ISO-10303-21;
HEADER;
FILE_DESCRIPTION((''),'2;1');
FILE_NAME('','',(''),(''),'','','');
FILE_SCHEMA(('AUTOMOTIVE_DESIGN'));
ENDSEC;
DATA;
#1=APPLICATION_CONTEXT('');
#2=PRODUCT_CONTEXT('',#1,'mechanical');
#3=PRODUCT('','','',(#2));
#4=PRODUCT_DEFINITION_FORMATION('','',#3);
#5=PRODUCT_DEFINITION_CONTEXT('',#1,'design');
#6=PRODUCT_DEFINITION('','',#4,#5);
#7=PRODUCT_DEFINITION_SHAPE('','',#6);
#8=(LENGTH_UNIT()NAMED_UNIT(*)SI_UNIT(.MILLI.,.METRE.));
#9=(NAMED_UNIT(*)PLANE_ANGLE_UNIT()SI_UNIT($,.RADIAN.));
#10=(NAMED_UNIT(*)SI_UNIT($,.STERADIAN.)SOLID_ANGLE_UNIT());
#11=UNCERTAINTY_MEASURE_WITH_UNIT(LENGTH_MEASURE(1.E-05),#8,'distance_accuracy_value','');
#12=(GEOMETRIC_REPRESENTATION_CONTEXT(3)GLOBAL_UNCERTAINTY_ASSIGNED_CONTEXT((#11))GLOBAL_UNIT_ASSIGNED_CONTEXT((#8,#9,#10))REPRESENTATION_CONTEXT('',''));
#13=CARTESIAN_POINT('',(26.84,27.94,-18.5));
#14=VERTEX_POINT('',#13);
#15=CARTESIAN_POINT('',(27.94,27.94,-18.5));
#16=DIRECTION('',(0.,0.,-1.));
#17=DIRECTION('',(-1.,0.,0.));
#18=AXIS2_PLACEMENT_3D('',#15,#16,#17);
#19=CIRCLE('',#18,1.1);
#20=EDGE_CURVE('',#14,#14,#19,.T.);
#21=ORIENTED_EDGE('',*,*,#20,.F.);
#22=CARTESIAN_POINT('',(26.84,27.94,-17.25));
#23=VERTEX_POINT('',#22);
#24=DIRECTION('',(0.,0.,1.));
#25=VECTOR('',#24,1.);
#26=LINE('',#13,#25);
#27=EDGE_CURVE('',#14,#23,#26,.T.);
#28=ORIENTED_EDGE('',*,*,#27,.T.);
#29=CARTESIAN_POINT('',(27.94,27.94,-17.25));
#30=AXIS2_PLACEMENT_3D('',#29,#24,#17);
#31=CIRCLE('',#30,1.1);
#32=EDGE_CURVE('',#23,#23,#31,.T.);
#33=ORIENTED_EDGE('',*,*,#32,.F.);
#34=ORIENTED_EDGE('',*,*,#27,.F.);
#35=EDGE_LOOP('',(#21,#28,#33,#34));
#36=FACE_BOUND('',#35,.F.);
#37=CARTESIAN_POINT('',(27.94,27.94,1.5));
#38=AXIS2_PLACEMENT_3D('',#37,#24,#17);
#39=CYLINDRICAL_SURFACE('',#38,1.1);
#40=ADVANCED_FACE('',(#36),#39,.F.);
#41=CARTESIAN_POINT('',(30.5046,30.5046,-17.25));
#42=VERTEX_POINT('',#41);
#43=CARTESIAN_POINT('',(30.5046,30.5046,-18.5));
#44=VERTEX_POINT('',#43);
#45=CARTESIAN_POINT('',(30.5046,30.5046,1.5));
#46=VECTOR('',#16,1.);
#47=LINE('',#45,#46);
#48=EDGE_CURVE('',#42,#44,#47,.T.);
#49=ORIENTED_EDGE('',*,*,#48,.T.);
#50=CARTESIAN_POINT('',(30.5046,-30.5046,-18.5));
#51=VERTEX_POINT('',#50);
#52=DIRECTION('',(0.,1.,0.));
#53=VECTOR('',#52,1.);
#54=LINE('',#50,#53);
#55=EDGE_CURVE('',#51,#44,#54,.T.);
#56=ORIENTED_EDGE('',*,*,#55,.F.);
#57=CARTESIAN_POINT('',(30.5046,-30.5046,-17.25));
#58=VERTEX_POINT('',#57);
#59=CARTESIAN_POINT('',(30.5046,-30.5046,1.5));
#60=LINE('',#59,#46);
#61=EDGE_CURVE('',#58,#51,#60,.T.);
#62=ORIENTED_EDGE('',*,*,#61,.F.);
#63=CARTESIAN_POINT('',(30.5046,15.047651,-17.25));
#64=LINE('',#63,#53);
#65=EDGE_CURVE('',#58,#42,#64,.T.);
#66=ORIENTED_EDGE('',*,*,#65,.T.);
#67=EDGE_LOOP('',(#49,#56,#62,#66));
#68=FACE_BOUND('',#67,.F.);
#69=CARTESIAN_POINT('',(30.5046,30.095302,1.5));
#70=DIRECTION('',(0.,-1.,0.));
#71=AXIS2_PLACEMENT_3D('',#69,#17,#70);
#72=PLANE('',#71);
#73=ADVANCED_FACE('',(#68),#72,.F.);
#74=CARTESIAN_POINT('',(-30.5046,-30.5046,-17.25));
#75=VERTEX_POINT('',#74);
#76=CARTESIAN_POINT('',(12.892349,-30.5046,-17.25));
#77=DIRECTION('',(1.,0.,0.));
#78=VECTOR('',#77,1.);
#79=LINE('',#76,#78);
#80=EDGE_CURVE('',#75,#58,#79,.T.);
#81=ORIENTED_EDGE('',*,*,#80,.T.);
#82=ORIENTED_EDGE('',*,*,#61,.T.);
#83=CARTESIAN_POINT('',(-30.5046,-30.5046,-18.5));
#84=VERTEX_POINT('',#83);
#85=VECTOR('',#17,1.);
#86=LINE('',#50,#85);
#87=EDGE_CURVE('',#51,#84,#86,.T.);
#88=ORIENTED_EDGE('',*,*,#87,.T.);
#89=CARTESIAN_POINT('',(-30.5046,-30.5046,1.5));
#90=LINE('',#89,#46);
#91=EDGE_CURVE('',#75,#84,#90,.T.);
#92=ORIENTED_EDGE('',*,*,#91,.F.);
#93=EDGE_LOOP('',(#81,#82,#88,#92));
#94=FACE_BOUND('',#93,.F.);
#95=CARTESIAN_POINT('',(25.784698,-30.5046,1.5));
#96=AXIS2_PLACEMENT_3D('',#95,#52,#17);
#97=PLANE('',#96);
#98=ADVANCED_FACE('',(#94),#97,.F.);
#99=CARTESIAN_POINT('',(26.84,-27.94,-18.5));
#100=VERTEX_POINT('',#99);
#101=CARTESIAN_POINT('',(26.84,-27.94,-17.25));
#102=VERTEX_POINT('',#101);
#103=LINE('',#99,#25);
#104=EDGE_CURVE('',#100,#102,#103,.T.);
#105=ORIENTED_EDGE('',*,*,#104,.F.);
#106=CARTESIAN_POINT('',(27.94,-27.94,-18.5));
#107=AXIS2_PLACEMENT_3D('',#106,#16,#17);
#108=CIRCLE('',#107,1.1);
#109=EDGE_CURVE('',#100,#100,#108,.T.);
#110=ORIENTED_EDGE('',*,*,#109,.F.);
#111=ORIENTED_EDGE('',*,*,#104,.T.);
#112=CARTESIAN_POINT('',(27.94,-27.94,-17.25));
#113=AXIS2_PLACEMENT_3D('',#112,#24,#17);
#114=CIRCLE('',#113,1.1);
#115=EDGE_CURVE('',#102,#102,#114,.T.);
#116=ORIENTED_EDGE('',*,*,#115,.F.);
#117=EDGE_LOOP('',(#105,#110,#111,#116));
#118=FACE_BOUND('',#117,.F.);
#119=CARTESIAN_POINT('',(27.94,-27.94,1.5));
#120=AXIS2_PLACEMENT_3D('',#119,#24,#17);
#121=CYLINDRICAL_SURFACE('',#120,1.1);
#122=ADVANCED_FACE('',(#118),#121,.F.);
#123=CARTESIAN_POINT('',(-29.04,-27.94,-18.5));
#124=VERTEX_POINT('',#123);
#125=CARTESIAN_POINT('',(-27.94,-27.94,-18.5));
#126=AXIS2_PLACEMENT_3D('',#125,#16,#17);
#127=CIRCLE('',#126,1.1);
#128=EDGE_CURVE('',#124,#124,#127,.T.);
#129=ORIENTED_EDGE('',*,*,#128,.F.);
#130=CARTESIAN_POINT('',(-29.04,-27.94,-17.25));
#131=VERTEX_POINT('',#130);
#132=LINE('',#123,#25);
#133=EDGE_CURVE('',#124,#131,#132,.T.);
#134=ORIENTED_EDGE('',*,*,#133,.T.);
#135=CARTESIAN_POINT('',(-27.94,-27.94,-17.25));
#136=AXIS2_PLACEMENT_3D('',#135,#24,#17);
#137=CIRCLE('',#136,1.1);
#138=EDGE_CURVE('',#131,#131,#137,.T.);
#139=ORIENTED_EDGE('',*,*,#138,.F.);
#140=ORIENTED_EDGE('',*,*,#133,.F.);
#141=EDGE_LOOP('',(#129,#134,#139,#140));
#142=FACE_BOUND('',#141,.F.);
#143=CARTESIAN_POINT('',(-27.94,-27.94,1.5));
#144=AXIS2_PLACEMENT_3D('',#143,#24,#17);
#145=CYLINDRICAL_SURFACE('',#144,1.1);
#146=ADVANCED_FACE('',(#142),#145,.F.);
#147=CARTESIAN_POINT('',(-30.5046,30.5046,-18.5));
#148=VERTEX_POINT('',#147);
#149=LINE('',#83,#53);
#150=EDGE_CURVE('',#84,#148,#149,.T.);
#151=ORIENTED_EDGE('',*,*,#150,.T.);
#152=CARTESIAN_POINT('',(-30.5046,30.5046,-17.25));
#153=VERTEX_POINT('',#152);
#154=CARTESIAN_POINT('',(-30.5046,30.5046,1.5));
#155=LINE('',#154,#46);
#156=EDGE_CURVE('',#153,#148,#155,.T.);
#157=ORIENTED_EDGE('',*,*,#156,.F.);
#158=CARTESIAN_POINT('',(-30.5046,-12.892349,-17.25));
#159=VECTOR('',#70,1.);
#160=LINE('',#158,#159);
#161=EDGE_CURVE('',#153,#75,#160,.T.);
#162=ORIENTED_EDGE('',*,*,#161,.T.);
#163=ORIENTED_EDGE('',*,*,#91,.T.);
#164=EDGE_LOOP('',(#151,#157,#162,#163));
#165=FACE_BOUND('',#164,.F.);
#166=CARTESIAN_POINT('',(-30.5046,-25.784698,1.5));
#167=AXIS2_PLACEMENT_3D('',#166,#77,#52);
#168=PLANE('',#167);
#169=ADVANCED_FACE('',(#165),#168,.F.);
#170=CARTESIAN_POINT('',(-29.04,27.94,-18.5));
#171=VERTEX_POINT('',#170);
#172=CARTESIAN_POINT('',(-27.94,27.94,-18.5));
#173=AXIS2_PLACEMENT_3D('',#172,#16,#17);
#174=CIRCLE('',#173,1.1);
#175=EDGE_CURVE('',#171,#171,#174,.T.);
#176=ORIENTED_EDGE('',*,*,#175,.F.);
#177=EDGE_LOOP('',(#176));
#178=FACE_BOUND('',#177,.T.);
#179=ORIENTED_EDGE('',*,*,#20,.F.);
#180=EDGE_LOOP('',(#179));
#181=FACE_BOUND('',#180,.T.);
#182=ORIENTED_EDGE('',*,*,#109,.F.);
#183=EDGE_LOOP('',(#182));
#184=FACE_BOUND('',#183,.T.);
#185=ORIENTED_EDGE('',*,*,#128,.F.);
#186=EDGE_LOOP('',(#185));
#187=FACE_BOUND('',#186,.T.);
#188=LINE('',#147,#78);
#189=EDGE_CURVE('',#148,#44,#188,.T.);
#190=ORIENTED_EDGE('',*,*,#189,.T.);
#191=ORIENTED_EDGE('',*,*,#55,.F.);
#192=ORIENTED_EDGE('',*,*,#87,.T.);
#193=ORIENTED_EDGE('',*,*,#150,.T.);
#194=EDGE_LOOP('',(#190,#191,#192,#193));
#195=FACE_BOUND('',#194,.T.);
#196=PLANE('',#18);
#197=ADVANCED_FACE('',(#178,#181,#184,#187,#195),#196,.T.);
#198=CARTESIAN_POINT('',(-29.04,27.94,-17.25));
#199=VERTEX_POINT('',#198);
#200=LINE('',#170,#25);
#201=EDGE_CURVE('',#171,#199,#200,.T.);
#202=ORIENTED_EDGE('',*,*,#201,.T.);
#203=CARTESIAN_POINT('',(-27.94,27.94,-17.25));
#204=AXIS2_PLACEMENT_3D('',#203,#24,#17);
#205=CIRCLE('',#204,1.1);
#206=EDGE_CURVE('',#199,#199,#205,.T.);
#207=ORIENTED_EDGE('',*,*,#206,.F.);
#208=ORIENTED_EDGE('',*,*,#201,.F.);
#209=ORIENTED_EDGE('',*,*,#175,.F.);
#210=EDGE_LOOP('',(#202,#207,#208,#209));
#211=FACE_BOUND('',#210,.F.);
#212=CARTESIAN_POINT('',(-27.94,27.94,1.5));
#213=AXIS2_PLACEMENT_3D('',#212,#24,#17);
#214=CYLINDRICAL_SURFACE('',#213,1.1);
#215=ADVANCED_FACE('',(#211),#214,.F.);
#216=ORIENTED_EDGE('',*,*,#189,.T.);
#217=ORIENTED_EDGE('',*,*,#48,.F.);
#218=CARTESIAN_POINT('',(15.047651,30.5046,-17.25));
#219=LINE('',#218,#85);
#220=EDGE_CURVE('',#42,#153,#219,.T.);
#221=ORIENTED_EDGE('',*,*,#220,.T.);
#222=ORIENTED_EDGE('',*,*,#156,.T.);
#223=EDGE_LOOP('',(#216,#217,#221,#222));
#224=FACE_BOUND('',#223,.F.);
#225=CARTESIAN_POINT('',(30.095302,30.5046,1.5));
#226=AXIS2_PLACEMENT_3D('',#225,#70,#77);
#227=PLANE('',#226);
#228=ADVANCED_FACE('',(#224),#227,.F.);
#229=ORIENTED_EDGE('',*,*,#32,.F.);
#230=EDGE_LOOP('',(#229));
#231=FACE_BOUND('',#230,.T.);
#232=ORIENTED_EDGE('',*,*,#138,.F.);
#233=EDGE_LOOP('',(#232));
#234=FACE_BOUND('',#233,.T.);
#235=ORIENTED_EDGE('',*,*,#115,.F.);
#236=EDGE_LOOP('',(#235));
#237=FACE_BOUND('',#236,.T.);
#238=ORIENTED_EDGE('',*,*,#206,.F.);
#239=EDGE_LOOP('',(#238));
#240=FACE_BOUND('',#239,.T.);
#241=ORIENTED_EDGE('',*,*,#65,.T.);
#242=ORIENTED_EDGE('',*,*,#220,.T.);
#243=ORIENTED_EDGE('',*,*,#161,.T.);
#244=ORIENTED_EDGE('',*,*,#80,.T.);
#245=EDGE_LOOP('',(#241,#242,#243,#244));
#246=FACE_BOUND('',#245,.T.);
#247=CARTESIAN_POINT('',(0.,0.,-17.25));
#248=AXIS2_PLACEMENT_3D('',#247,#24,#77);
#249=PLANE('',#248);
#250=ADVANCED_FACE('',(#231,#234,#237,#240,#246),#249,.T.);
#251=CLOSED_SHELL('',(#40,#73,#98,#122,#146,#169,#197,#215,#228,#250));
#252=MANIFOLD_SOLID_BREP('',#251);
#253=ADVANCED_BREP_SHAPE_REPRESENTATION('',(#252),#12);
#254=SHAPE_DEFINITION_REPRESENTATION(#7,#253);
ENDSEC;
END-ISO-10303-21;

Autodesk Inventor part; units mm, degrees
ref_plane "YZ Plane" through (0, 0, 0) normal (1, 0, 0) x (0, 1, 0)
ref_plane "XZ Plane" through (0, 0, 0) normal (0, 1, 0) x (-1, 0, 0)
ref_plane "XY Plane" through (0, 0, 0) normal (0, 0, 1) x (1, 0, 0)
sketch "Skizze1" plane through (0, 0, 0) normal (0, 0, 1) x (1, 0, 0)
  line L0 (-33.02, -33.02) -> (33.02, -33.02)
  line L1 (33.02, -33.02) -> (33.02, 33.02)
  line L2 (33.02, 33.02) -> (-33.02, 33.02)
  line L3 (-33.02, 33.02) -> (-33.02, -33.02)
  line L4 (-33.02, -33.02) -> (33.02, 33.02) construction
  line L5 (33.02, -33.02) -> (-33.02, 33.02) construction
  line L6 (-34, -34) -> (34, -34)
  line L7 (34, -34) -> (34, 34)
  line L8 (34, 34) -> (-34, 34)
  line L9 (-34, 34) -> (-34, -34)
  line L10 (-34, -34) -> (34, 34) construction
  line L11 (34, -34) -> (-34, 34) construction
  point P0 (0, 0)
  dimension "d0" = 66.04
  dimension "d1" = 66.04
  dimension "d2" = 68
  dimension "d3" = 68
extrude "Extrusion1" add sketch "Skizze1" along normal blind 6.5
sketch "Skizze2" plane through (0, 0, 6.5) normal (0, 0, 1) x (1, 0, 0)
  line L0 (-33.02, 33.02) -> (33.02, 33.02) projected
  line L1 (-33.02, -33.02) -> (33.02, -33.02)
  line L2 (33.02, -33.02) -> (33.02, 33.02)
  line L3 (33.02, 33.02) -> (-33.02, 33.02)
  line L4 (-33.02, 33.02) -> (-33.02, -33.02)
  line L5 (-33.02, -33.02) -> (33.02, 33.02) construction
  line L6 (33.02, -33.02) -> (-33.02, 33.02) construction
  line L7 (34, -34) -> (34, 34) projected
  line L8 (34, 34) -> (-34, 34) projected
  line L9 (-34, 34) -> (-34, -34) projected
  line L10 (-34, -34) -> (34, -34) projected
  line L11 (-33.02, -33.02) -> (-33.02, 33.02) projected
  line L12 (-33.02, 33.02) -> (33.02, 33.02) projected
  line L13 (33.02, 33.02) -> (33.02, -33.02) projected
  line L14 (33.02, -33.02) -> (-33.02, -33.02) projected
  point P0 (0, 0)
extrude "Extrusion2" add sketch "Skizze2" along normal blind 2 contours L0 L2 L1 L4 | L10 L9 L8 L7
sketch "Skizze3" plane through (0, 0, 6.5) normal (0, 0, -1) x (-1, 0, 0)
  line L0 (-27.94, -27.94) -> (27.94, -27.94)
  line L1 (27.94, -27.94) -> (27.94, 27.94)
  line L2 (27.94, 27.94) -> (-27.94, 27.94)
  line L3 (-27.94, 27.94) -> (-27.94, -27.94)
  line L4 (-27.94, -27.94) -> (27.94, 27.94) construction
  line L5 (27.94, -27.94) -> (-27.94, 27.94) construction
  circle A0 centre (-27.94, 27.94) radius 3.35
  circle A1 centre (27.94, 27.94) radius 3.35
  circle A2 centre (27.94, -27.94) radius 3.35
  circle A3 centre (-27.94, -27.94) radius 3.35
  point P0 (0, 0)
  dimension "d8" = 55.88
  dimension "d9" = 55.88
  dimension "d10" = 6.7
  dimension "d11" = 6.7
  dimension "d12" = 6.7
  dimension "d13" = 6.7
extrude "Extrusion3" add sketch "Skizze3" along normal blind 5 contours L3 A3 L0 | L0 A3 L3 | A2 L1 L0 | L0 L1 A2 | A0 L2 L3 | L3 L2 A0 | A1 L2 L1 | L1 L2 A1
sketch "Skizze4" plane through (27.94, 27.94, 1.5) normal (0, 0, -1) x (-1, 0, 0)
  circle A0 centre (0, 0) radius 1.1
  circle A1 centre (55.88, 0) radius 3.35 projected
  circle A2 centre (55.88, 0) radius 1.1
  circle A3 centre (55.88, -55.88) radius 3.35 projected
  circle A4 centre (55.88, -55.88) radius 1.1
  circle A5 centre (0, -55.88) radius 3.35 projected
  circle A6 centre (0, -55.88) radius 1.1
  point P0 (27.94, -27.94)
  dimension "d17" = 2.2
  dimension "d18" = 2.2
  dimension "d19" = 2.2
  dimension "d20" = 2.2
extrude "Extrusion4" cut sketch "Skizze4" against normal blind 5 contours A0 | A2 | A4 | A6
sketch "Skizze5" plane through (0, 0, 0) normal (0, 0, -1) x (-1, 0, 0)
  line L0 (-34, -34) -> (-34, 34) projected
  line L1 (34, -34) -> (-34, -34) projected
  line L2 (34, 34) -> (34, -34) projected
  line L3 (-34, 34) -> (34, 34) projected
  line L4 (33.02, -33.02) -> (33.02, 33.02) projected
  line L5 (-33.02, -33.02) -> (33.02, -33.02) projected
  line L6 (-33.02, 33.02) -> (-33.02, -33.02) projected
  line L7 (33.02, 33.02) -> (-33.02, 33.02) projected
  point P0 (0, 0)
extrude "Extrusion5" add sketch "Skizze5" along normal blind 4
sketch "Skizze6" plane through (0, 0, -4) normal (0, 0, -1) x (-1, 0, 0)
  line L0 (-33.02, -33.02) -> (33.02, -33.02)
  line L1 (33.02, -33.02) -> (33.02, 33.02)
  line L2 (33.02, 33.02) -> (-33.02, 33.02)
  line L3 (-33.02, 33.02) -> (-33.02, -33.02)
  line L4 (-33.02, -33.02) -> (33.02, 33.02) construction
  line L5 (33.02, -33.02) -> (-33.02, 33.02) construction
  line L6 (33.02, -33.02) -> (20.02, -33.02)
  line L7 (-33.02, -33.02) -> (33.02, -33.02) projected
  line L8 (20.02, -33.02) -> (10.08, -33.02)
  line L9 (34, -34) -> (-34, -34) projected
  line L10 (10.08, -33.02) -> (20.02, -33.02)
  line L11 (20.02, -33.02) -> (20.02, -34)
  line L12 (20.02, -34) -> (10.08, -34)
  line L13 (10.08, -34) -> (10.08, -33.02)
  point P0 (0, 0)
  point P1 (-24.13, -33.02)
  point P2 (24.13, -33.02)
  dimension "d25" = 66.04
  dimension "d26" = 66.04
  dimension "d27" = 13
  dimension "d28" = 9.94
extrude "Extrusion6" cut sketch "Skizze6" against normal blind 4 contours L0 L11 L9 L13
fillet "Rundung2" radius 1.75 2 edges at (-10.08, -33.51, 0) (-20.02, -33.51, 0)
sketch "Skizze7" plane through (0, 0, -4) normal (0, 0, -1) x (-1, 0, 0)
  line L0 (34, 34) -> (-34, 34) projected
  line L1 (-34, -34) -> (34, -34)
  line L2 (34, -34) -> (34, 34)
  line L3 (34, 34) -> (-34, 34)
  line L4 (-34, 34) -> (-34, -34)
  line L5 (-34, -34) -> (34, 34) construction
  line L6 (34, -34) -> (-34, 34) construction
  line L7 (-35, -35) -> (35, -35)
  line L8 (35, -35) -> (35, 35)
  line L9 (35, 35) -> (-35, 35)
  line L10 (-35, 35) -> (-35, -35)
  line L11 (-35, -35) -> (35, 35) construction
  line L12 (35, -35) -> (-35, 35) construction
  point P0 (0, 0)
  point P1 (-34, 34)
  dimension "d32" = 70
  dimension "d33" = 70
extrude "Extrusion7" add sketch "Skizze7" against normal up to surface (12.5 mm away)
sketch "Skizze8" plane through (-20.02, -34, -4) normal (0, 1, 0) x (1, 0, 0)
  line L0 (9.94, -2.25) -> (9.94, 0) projected
  line L1 (0, 0) -> (9.94, 0) projected
  line L2 (0, 0) -> (0, -2.25) projected
  arc A0 (0, -2.25) -> (1.75, -4) centre (1.75, -2.25) ccw projected
  line L3 (1.75, -4) -> (8.19, -4) projected
  arc A1 (8.19, -4) -> (9.94, -2.25) centre (8.19, -2.25) ccw projected
  point P0 (20.02, -4)
extrude "Extrusion8" cut sketch "Skizze8" against normal blind 10
sketch "Skizze9" plane through (0, 0, -4) normal (0, 0, -1) x (-1, 0, 0)
  line L0 (-33.52, 33.52) -> (33.52, 33.52)
  line L1 (33.52, 33.52) -> (33.52, -33.52)
  line L2 (33.52, -33.52) -> (-33.52, -33.52)
  line L3 (-33.52, -33.52) -> (-33.52, 33.52)
  line L4 (-33.52, 33.52) -> (33.52, -33.52) construction
  line L5 (33.52, 33.52) -> (-33.52, -33.52) construction
  line L6 (10.08, -35) -> (10.08, -33.02) projected
  line L7 (10.08, -33.02) -> (-33.02, -33.02) projected
  line L8 (-33.02, -33.02) -> (-33.02, 33.02) projected
  line L9 (-33.02, 33.02) -> (33.02, 33.02) projected
  line L10 (33.02, 33.02) -> (33.02, -33.02) projected
  line L11 (33.02, -33.02) -> (20.02, -33.02) projected
  line L12 (20.02, -33.02) -> (20.02, -35) projected
  line L13 (20.02, -35) -> (35, -35) projected
  line L14 (35, -35) -> (35, 35) projected
  line L15 (35, 35) -> (-35, 35) projected
  line L16 (-35, 35) -> (-35, -35) projected
  line L17 (-35, -35) -> (10.08, -35) projected
  point P0 (0, 0)
  point P1 (10.08, -33.52)
  point P2 (20.02, -33.52)
  dimension "d38" = 67.04
  dimension "d39" = 67.04
extrude "Extrusion9" cut sketch "Skizze9" against normal up to surface (10.5 mm away) contours L0 L1 L2 L12 L11 L10 L9 L8 L7 L6 L3
fillet "Rundung3" radius 2 4 edges at (31.29, -27.94, 6.5) (31.29, 27.94, 6.5) (-24.59, 27.94, 6.5) (-24.59, -27.94, 6.5)
sketch "Skizze10" plane through (-35, -35, -4) normal (-1, 0, 0) x (0, 0, 1)
  point P0 (4, 35)
sketch "Skizze11" plane through (0, 0, 8.5) normal (0, 0, 1) x (1, 0, 0)
  point P0 (0, 0)
sketch "Skizze12" plane through (-18.27, -33.02, 0) normal (0, 1, 0) x (1, 0, 0)
  line L0 (-1.75, 1.75) -> (-1.75, -6.5) projected
  line L1 (8.19, -6.5) -> (-1.75, -6.5) projected
  line L2 (8.19, -6.5) -> (8.19, 1.75) projected
  arc A0 (6.44, 0) -> (8.19, 1.75) centre (6.44, 1.75) ccw projected
  line L3 (6.44, 0) -> (0, 0) projected
  arc A1 (-1.75, 1.75) -> (0, 0) centre (0, 1.75) ccw projected
  point P0 (18.27, 0)
extrude "Extrusion10" cut sketch "Skizze12" against normal up to surface (0.5 mm away)
sketch "Skizze13" plane through (0, 0, -4) normal (0, 0, -1) x (-1, 0, 0)
  circle A0 centre (0, 0) radius 4
  line L0 (0, 0) -> (-10.0581, 1.7135)
  line L1 (0, 0) -> (10.203, 0) construction
  line L2 (0, 0) -> (1.8539, 9.7483)
  line L3 (0, 0) -> (9.923, 0) construction
  line L4 (0, 0) -> (9.888, -2.1637)
  line L5 (0, 0) -> (10.122, 0) construction
  line L6 (0, 0) -> (-2.0234, -10.1982)
  line L7 (0, 0) -> (10.397, 0) construction
  circle A1 centre (-2.0234, -10.1982) radius 2.5
  circle A2 centre (-10.0581, 1.7135) radius 2.5
  circle A3 centre (1.8539, 9.7483) radius 2.5
  circle A4 centre (9.888, -2.1637) radius 2.5
  dimension "d59" = 8
  dimension "d60" = 10.203
  dimension "d61" = 170.332
  dimension "d62" = 9.923
  dimension "d63" = 79.232
  dimension "d64" = 10.122
  dimension "d65" = 12.343
  dimension "d66" = 10.397
  dimension "d67" = 101.222
  dimension "d68" = 5
  dimension "d69" = 5
  dimension "d70" = 5
  dimension "d71" = 5
extrude "Extrusion11" add sketch "Skizze13" against normal up to surface (10.5 mm away) contours A1 | A2 | A3 | A4
sketch "Skizze14" plane through (-9.888, -2.1637, -4) normal (0, 0, -1) x (-1, 0, 0)
  circle A0 centre (0, 0) radius 2.5 projected
  circle A1 centre (-11.9114, -8.0345) radius 2.5 projected
  circle A2 centre (-19.9461, 3.8772) radius 2.5 projected
  circle A3 centre (-8.0341, 11.912) radius 2.5 projected
  point P0 (-9.888, 2.1637)
extrude "Extrusion12" cut sketch "Skizze14" against normal blind 5.5
fillet "Rundung4" radius 4 4 edges at (12.5581, 1.7135, 6.5) (0.6461, 9.7483, 6.5) (-7.388, -2.1637, 6.5) (4.5234, -10.1982, 6.5)
sketch "Skizze15" plane through (-9.888, -2.1637, 1.5) normal (0, 0, -1) x (-1, 0, 0)
  circle A0 centre (0, 0) radius 1
  circle A1 centre (-11.9114, -8.0345) radius 2.5 projected
  circle A2 centre (-11.9114, -8.0345) radius 1
  circle A3 centre (-19.9461, 3.8772) radius 2.5 projected
  circle A4 centre (-19.9461, 3.8772) radius 1
  circle A5 centre (-8.0341, 11.912) radius 2.5 projected
  circle A6 centre (-8.0341, 11.912) radius 1
  point P0 (-9.888, 2.1637)
  dimension "d77" = 2
  dimension "d78" = 2
  dimension "d79" = 2
  dimension "d80" = 2
extrude "Extrusion13" cut sketch "Skizze15" against normal blind 5 contours A0 | A2 | A4 | A6
chamfer "Fase1" distance 4 angle 45 4 edges at (-33.52, 0, 6.5) (0, -33.52, 6.5) (0, 33.52, 6.5) (33.52, 0, 6.5)
sketch "Skizze16" plane through (10.0581, 1.7135, 1.5) normal (0, 0, -1) x (-1, 0, 0)
  circle A0 centre (0, 0) radius 1.6
  circle A1 centre (8.0347, -11.9117) radius 1 projected
  circle A2 centre (8.0347, -11.9117) radius 1.6
  circle A3 centre (11.912, 8.0348) radius 1 projected
  circle A4 centre (11.912, 8.0348) radius 1.6
  circle A5 centre (19.9461, -3.8772) radius 1 projected
  circle A6 centre (19.9461, -3.8772) radius 1.6
  point P0 (10.0581, -1.7135)
  dimension "d86" = 3.2
  dimension "d87" = 3.2
  dimension "d88" = 3.2
  dimension "d89" = 3.2
extrude "Extrusion14" cut sketch "Skizze16" against normal blind 10 contours A0 | A1 | A2 | A3 | A4 | A5 | A6
chamfer "Fase2" distance 2 angle 45 4 edges at (-8.288, -2.1637, 8.5) (3.6234, -10.1982, 8.5) (11.6581, 1.7135, 8.5) (-0.2539, 9.7483, 8.5)
sketch "Skizze17" plane through (27.94, 27.94, 1.5) normal (0, 0, -1) x (-1, 0, 0)
  circle A0 centre (0, 0) radius 1.1 projected
  circle A1 centre (0, 0) radius 3.35 projected
  circle A2 centre (55.88, 0) radius 1.1 projected
  circle A3 centre (55.88, 0) radius 3.35 projected
  circle A4 centre (55.88, -55.88) radius 1.1 projected
  circle A5 centre (55.88, -55.88) radius 3.35 projected
  circle A6 centre (0, -55.88) radius 1.1 projected
  circle A7 centre (0, -55.88) radius 3.35 projected
  line L0 (61.46, 5.58) -> (58.4446, 2.5646) projected
  line L1 (-2.5646, -58.4446) -> (58.4446, -58.4446)
  line L2 (58.4446, -58.4446) -> (58.4446, 2.5646)
  line L3 (58.4446, 2.5646) -> (-2.5646, 2.5646)
  line L4 (-2.5646, 2.5646) -> (-2.5646, -58.4446)
  line L5 (-2.5646, -58.4446) -> (58.4446, 2.5646) construction
  line L6 (58.4446, -58.4446) -> (-2.5646, 2.5646) construction
  point P0 (27.94, -27.94)
extrude "Extrusion15" add sketch "Skizze17" along normal blind 20 contours A1 L4 L3 | A1 L3 A3 L2 A5 L1 A7 L4 | A1 L4 L3 | L3 A3 L2 | A7 L1 L4 | L3 L2 A3 | A7 L1 L4 | L2 A5 L1 | L2 L1 A5
sketch "Skizze18" plane through (0, 0, 8.5) normal (0, 0, 1) x (1, 0, 0)
  line L0 (-192.7529, 161.1187) -> (54.5088, 161.1187)
  line L1 (54.5088, 161.1187) -> (54.5088, -50.2743)
  line L2 (54.5088, -50.2743) -> (-192.7529, -50.2743)
  line L3 (-192.7529, -50.2743) -> (-192.7529, 161.1187)
  line L4 (-192.7529, 161.1187) -> (54.5088, -50.2743) construction
  line L5 (54.5088, 161.1187) -> (-192.7529, -50.2743) construction
  point P0 (0, 0)
  point P1 (-69.122, 55.4222)
extrude "Extrusion16" cut sketch "Skizze18" against normal blind 25.75
properties part number "bottomplate_3D-Druck"
